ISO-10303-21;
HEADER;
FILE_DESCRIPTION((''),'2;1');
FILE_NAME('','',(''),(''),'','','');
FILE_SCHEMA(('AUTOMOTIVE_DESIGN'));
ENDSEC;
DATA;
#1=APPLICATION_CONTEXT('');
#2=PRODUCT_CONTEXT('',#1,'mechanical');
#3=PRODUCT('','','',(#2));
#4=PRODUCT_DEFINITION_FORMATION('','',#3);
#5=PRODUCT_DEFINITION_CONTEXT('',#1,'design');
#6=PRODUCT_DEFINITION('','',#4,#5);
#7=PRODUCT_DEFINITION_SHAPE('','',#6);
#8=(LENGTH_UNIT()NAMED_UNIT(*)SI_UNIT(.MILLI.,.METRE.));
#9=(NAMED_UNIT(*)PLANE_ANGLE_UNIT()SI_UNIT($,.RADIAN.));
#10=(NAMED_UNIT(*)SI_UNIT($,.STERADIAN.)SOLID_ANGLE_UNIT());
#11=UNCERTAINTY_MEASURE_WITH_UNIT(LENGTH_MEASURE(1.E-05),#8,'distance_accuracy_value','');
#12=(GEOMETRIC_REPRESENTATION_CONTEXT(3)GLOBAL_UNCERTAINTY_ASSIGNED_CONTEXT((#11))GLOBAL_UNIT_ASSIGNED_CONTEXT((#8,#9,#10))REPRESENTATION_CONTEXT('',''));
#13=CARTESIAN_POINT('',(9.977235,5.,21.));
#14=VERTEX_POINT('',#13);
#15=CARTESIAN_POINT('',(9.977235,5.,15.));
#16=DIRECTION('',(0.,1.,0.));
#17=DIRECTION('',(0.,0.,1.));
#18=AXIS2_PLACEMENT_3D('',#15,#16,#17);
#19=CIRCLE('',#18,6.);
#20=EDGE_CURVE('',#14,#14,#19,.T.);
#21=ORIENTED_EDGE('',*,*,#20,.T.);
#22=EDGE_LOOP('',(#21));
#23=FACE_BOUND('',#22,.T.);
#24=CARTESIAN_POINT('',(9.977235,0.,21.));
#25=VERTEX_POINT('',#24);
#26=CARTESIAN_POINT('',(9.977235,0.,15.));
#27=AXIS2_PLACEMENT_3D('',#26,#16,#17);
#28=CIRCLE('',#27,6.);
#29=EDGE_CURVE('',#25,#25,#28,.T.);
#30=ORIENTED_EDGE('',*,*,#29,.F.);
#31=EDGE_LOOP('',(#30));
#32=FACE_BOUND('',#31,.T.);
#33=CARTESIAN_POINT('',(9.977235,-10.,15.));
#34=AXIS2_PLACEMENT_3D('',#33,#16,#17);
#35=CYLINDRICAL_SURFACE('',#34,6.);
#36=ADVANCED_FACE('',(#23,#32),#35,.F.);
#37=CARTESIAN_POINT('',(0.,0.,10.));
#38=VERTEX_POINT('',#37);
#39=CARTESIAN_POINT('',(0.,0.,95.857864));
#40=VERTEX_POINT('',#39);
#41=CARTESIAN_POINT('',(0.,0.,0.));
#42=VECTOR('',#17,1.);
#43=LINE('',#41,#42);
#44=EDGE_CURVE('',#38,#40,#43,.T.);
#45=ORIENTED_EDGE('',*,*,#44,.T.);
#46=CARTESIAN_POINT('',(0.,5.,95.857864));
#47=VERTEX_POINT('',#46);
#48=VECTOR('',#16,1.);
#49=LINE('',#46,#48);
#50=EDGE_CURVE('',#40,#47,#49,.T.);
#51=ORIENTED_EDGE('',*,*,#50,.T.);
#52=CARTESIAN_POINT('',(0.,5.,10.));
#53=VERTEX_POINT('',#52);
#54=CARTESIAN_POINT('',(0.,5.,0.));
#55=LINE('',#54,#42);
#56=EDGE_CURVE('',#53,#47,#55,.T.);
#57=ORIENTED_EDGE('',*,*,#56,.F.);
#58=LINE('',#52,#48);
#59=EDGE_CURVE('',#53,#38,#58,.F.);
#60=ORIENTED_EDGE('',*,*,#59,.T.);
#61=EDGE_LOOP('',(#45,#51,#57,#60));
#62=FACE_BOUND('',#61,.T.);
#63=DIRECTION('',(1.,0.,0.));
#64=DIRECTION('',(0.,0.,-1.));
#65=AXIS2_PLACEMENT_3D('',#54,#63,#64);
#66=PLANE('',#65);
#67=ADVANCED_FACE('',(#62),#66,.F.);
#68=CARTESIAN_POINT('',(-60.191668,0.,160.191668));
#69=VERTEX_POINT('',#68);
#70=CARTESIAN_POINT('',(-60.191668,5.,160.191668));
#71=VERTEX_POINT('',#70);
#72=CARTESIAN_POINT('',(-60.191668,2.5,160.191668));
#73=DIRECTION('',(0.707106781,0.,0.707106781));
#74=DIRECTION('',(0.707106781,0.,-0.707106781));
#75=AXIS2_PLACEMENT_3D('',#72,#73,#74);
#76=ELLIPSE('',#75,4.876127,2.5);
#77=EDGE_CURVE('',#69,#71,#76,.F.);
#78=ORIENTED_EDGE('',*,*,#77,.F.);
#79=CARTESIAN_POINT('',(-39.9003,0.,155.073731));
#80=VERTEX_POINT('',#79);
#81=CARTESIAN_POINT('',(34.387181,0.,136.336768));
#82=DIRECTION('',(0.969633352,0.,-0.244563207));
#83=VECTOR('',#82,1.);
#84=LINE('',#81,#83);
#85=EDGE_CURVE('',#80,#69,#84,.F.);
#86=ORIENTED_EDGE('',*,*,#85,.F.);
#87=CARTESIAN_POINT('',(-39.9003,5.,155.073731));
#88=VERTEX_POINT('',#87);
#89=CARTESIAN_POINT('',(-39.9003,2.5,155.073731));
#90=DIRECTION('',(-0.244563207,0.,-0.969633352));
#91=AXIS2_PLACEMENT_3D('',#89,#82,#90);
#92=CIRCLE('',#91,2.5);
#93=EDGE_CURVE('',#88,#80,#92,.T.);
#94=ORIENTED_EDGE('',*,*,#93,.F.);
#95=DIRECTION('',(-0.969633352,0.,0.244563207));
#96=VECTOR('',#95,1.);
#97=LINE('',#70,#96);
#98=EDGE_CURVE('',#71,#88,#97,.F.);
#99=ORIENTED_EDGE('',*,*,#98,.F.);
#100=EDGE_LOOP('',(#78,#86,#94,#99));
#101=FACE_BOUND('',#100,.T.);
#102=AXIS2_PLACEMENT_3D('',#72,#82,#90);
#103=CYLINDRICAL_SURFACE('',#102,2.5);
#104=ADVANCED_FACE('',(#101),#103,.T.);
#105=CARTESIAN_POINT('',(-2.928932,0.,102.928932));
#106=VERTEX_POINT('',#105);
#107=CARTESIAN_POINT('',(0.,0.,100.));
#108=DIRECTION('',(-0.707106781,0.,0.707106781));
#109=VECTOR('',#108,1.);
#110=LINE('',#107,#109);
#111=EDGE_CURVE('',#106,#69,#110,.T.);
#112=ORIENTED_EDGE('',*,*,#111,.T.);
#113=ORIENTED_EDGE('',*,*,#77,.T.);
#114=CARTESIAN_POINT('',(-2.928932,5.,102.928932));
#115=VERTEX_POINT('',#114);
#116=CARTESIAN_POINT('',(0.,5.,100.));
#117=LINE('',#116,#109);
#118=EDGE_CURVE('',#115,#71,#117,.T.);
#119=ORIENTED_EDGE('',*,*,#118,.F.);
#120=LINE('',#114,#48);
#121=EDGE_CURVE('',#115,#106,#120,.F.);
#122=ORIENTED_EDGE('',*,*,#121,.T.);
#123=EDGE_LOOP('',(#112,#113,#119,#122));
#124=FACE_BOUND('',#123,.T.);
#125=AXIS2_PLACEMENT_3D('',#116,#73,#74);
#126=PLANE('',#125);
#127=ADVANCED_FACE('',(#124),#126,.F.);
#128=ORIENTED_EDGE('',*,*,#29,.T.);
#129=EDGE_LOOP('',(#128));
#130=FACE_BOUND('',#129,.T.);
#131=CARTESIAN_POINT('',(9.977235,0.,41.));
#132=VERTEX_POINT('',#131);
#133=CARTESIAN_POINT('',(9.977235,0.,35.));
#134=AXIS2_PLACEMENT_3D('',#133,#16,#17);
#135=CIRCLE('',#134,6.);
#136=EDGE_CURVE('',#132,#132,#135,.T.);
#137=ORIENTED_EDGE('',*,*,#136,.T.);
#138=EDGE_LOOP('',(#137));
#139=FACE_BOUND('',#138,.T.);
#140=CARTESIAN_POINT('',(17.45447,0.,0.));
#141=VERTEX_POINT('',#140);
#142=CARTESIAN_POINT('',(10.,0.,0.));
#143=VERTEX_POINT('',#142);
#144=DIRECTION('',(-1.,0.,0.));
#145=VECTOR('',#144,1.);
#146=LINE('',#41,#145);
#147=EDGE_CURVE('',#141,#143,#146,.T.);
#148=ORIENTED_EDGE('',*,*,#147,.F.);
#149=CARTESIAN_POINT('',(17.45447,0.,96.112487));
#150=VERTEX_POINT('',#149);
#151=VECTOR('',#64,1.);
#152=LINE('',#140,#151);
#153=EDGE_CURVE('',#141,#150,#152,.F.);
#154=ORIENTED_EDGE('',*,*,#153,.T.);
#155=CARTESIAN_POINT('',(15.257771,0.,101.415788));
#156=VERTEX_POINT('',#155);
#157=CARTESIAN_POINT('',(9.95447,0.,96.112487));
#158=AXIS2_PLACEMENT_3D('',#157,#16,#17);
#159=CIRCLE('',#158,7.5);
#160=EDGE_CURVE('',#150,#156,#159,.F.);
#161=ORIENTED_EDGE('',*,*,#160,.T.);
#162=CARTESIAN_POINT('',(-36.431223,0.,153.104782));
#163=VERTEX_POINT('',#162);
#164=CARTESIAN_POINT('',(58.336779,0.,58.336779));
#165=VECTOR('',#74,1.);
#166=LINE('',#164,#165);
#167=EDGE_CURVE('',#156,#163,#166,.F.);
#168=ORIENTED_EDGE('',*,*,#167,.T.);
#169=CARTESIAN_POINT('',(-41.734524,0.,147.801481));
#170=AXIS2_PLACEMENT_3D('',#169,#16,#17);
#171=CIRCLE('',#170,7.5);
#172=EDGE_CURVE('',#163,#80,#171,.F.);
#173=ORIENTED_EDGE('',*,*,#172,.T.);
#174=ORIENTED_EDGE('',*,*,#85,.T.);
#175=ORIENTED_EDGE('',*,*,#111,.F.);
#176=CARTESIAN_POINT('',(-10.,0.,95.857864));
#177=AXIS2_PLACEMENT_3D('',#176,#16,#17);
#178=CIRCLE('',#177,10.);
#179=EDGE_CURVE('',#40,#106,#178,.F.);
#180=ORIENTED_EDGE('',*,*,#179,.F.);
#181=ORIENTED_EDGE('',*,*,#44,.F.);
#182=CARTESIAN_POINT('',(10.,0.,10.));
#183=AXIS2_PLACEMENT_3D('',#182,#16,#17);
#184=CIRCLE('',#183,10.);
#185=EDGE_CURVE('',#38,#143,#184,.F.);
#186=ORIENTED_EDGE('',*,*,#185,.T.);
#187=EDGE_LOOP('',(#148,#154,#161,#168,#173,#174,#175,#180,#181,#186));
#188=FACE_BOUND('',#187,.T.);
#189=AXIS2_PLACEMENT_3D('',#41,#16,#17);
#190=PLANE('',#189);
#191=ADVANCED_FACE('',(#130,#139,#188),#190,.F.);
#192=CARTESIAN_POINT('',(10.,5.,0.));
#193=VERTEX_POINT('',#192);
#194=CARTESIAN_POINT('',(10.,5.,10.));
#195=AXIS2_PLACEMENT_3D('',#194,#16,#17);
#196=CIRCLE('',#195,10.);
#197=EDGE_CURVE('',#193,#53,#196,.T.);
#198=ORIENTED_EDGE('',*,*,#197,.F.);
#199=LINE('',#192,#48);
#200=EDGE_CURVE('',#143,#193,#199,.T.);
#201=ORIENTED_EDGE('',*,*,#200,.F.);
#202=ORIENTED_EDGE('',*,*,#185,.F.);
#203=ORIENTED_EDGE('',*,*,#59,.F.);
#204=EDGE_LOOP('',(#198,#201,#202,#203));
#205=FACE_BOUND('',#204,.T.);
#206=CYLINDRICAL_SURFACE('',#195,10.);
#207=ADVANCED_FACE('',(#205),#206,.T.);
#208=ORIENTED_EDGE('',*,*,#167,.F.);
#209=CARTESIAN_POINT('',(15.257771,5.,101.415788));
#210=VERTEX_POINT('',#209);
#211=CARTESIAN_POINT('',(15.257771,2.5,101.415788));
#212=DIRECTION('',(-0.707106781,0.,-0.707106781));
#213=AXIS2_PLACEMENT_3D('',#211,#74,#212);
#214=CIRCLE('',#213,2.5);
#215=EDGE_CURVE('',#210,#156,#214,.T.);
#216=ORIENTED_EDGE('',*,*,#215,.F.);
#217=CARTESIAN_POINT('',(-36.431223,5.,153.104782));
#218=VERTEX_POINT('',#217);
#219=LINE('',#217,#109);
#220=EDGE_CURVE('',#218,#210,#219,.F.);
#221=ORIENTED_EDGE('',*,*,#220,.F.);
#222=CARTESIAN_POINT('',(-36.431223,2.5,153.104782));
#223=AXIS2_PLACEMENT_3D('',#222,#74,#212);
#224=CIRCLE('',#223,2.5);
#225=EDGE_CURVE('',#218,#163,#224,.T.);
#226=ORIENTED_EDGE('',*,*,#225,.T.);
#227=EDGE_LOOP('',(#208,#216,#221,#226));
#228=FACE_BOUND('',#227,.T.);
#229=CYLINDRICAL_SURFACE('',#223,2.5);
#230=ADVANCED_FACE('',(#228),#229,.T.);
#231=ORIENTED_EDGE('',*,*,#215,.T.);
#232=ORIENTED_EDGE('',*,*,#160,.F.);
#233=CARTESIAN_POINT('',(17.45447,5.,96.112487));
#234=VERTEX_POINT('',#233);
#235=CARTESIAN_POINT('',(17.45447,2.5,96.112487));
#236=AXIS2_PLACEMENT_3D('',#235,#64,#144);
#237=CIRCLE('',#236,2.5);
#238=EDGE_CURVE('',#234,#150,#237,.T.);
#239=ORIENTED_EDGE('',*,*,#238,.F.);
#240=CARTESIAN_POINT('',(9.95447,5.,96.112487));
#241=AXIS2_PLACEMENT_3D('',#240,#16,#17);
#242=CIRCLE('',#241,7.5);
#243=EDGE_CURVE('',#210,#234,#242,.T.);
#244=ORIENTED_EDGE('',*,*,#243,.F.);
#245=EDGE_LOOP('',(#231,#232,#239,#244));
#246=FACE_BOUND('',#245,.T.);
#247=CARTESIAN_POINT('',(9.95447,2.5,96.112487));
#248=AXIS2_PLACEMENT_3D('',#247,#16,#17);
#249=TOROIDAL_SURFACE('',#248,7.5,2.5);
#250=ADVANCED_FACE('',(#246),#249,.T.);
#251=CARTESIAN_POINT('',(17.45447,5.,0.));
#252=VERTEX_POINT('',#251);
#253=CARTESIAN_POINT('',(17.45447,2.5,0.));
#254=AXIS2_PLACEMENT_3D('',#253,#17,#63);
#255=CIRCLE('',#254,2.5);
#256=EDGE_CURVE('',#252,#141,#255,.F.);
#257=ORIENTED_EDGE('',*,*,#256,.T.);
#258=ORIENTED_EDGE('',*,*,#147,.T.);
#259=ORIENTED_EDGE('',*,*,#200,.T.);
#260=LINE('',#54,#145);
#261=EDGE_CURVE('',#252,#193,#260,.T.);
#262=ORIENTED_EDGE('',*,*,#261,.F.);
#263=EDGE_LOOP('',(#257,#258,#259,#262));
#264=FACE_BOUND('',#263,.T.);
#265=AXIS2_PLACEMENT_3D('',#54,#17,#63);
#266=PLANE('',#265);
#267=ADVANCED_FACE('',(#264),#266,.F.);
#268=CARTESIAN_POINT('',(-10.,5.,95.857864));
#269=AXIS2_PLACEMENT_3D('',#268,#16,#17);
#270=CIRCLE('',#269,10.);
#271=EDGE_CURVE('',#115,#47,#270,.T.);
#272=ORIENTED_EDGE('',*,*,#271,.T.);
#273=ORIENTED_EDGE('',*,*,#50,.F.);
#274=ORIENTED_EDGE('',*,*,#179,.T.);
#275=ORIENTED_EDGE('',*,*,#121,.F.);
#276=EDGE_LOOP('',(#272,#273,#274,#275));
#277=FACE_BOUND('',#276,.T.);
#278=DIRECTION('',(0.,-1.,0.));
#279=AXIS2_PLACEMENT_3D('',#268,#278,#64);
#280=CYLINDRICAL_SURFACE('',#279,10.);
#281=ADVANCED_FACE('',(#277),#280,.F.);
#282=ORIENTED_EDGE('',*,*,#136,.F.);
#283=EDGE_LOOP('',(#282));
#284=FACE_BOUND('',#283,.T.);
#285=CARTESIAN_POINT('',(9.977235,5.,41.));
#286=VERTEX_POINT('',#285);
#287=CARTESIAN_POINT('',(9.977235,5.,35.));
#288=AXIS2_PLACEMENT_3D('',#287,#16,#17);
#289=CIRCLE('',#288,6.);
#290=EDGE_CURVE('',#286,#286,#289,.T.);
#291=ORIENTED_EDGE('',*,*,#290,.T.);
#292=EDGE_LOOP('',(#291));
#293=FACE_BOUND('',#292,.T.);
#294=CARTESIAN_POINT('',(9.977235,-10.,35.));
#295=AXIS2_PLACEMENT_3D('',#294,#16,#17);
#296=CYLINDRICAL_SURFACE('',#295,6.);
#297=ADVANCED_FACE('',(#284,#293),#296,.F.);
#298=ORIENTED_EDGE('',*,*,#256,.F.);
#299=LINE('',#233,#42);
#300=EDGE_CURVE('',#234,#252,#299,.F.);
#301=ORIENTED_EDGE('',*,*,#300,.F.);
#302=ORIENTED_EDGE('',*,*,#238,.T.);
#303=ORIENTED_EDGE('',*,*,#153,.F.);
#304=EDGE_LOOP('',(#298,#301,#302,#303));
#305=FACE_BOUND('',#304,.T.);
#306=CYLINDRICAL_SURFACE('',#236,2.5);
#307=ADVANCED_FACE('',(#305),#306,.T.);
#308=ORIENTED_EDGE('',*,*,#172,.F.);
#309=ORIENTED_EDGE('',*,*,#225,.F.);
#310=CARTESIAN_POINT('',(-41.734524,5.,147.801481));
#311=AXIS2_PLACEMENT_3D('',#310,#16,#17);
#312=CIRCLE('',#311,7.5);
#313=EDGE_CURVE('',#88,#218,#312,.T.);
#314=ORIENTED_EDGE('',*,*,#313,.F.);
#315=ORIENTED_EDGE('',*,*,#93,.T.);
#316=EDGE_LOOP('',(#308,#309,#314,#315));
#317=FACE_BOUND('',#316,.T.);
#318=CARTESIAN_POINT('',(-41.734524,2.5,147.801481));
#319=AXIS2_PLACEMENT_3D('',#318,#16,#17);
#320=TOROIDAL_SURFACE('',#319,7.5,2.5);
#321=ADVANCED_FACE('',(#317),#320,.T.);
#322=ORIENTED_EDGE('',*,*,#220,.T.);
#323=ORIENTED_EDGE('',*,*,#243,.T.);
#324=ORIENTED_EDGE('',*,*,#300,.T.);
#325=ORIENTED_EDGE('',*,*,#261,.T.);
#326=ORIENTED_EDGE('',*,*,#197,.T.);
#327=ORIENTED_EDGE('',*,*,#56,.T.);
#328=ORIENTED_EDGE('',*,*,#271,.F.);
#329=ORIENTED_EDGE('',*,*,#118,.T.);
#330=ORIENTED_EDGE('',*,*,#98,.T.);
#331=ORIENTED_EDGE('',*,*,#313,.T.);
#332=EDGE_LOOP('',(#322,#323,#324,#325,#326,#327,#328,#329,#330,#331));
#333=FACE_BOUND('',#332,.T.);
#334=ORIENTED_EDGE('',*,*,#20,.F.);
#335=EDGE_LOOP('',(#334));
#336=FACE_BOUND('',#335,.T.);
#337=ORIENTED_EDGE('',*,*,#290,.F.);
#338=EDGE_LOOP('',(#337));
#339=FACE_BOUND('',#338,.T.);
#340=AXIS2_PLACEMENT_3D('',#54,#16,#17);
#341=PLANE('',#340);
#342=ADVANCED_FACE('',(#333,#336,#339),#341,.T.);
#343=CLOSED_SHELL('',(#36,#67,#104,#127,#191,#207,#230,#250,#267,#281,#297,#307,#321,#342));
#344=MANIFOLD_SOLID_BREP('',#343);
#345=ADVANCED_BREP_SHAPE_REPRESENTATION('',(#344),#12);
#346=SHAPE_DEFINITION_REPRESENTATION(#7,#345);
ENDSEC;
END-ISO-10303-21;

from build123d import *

# Parameters (mm, degrees)
EXTRUDE_2_DEPTH     = 5
SKETCH_5_R          = 6
CUT_EXTRUDE_2_DEPTH = 15
FILLET_1_R          = 10
FILLET_2_R          = 10
FILLET_3_R          = 10
FILLET_6_R          = 10
FILLET_8_R          = 2.5


with BuildPart() as part:
    # 草图2 → 凸台-拉伸2 (new body)
    with BuildSketch(Plane(origin=(0, 0, 0), x_dir=(1, 0, 0), z_dir=(0, 1, 0))):
        Polygon((0, 0), (19.954469714, 0), (19.954469714, -100.254623121), (-36.614072781, -156.823165616), (-63.639610307, -163.639610307), (0, -100), align=None)
    extrude(amount=EXTRUDE_2_DEPTH)

    # 草图5 → 切除-拉伸2 (cut)
    with BuildSketch(Plane(origin=(0, 5, 0), x_dir=(1, 0, 0), z_dir=(0, 1, 0))):
        with Locations(Location((9.977234857, -15, 0), (0, 0, 270))):
            Circle(SKETCH_5_R)
        with Locations(Location((9.977234857, -35, 0), (0, 0, 270))):
            Circle(SKETCH_5_R)
    extrude(amount=-CUT_EXTRUDE_2_DEPTH, mode=Mode.SUBTRACT)

    # 圆角1
    fillet_1_edges = [part.edges().sort_by_distance(p)[0] for p in [
        (0, 2.5, 100),
    ]]
    fillet(fillet_1_edges, radius=FILLET_1_R)

    # 圆角2
    fillet_2_edges = [part.edges().sort_by_distance(p)[0] for p in [
        (19.954469714, 2.5, 100.254623121),
    ]]
    fillet(fillet_2_edges, radius=FILLET_2_R)

    # 圆角3
    fillet_3_edges = [part.edges().sort_by_distance(p)[0] for p in [
        (-36.614072781, 2.5, 156.823165616),
    ]]
    fillet(fillet_3_edges, radius=FILLET_3_R)

    # 圆角6
    fillet_6_edges = [part.edges().sort_by_distance(p)[0] for p in [
        (0, 2.5, 0),
    ]]
    fillet(fillet_6_edges, radius=FILLET_6_R)

    # 圆角8
    fillet_8_edges = [part.edges().sort_by_distance(p)[0] for p in [
        (-51.464251164, 5, 160.568712564),
        (19.954469714, 0, 48.056243749),
        (19.954469714, 5, 48.056243749),
        (19.193265039, 5, 99.939321821),
        (-8.818959374, 0, 129.02805221),
        (-8.818959374, 5, 129.02805221),
        (-36.79844273, 5, 156.498325602),
        (-51.464251164, 0, 160.568712564),
    ]]
    fillet(fillet_8_edges, radius=FILLET_8_R - 0.0001)  # a hair under: the kernel refuses the full size


solid = part.part
